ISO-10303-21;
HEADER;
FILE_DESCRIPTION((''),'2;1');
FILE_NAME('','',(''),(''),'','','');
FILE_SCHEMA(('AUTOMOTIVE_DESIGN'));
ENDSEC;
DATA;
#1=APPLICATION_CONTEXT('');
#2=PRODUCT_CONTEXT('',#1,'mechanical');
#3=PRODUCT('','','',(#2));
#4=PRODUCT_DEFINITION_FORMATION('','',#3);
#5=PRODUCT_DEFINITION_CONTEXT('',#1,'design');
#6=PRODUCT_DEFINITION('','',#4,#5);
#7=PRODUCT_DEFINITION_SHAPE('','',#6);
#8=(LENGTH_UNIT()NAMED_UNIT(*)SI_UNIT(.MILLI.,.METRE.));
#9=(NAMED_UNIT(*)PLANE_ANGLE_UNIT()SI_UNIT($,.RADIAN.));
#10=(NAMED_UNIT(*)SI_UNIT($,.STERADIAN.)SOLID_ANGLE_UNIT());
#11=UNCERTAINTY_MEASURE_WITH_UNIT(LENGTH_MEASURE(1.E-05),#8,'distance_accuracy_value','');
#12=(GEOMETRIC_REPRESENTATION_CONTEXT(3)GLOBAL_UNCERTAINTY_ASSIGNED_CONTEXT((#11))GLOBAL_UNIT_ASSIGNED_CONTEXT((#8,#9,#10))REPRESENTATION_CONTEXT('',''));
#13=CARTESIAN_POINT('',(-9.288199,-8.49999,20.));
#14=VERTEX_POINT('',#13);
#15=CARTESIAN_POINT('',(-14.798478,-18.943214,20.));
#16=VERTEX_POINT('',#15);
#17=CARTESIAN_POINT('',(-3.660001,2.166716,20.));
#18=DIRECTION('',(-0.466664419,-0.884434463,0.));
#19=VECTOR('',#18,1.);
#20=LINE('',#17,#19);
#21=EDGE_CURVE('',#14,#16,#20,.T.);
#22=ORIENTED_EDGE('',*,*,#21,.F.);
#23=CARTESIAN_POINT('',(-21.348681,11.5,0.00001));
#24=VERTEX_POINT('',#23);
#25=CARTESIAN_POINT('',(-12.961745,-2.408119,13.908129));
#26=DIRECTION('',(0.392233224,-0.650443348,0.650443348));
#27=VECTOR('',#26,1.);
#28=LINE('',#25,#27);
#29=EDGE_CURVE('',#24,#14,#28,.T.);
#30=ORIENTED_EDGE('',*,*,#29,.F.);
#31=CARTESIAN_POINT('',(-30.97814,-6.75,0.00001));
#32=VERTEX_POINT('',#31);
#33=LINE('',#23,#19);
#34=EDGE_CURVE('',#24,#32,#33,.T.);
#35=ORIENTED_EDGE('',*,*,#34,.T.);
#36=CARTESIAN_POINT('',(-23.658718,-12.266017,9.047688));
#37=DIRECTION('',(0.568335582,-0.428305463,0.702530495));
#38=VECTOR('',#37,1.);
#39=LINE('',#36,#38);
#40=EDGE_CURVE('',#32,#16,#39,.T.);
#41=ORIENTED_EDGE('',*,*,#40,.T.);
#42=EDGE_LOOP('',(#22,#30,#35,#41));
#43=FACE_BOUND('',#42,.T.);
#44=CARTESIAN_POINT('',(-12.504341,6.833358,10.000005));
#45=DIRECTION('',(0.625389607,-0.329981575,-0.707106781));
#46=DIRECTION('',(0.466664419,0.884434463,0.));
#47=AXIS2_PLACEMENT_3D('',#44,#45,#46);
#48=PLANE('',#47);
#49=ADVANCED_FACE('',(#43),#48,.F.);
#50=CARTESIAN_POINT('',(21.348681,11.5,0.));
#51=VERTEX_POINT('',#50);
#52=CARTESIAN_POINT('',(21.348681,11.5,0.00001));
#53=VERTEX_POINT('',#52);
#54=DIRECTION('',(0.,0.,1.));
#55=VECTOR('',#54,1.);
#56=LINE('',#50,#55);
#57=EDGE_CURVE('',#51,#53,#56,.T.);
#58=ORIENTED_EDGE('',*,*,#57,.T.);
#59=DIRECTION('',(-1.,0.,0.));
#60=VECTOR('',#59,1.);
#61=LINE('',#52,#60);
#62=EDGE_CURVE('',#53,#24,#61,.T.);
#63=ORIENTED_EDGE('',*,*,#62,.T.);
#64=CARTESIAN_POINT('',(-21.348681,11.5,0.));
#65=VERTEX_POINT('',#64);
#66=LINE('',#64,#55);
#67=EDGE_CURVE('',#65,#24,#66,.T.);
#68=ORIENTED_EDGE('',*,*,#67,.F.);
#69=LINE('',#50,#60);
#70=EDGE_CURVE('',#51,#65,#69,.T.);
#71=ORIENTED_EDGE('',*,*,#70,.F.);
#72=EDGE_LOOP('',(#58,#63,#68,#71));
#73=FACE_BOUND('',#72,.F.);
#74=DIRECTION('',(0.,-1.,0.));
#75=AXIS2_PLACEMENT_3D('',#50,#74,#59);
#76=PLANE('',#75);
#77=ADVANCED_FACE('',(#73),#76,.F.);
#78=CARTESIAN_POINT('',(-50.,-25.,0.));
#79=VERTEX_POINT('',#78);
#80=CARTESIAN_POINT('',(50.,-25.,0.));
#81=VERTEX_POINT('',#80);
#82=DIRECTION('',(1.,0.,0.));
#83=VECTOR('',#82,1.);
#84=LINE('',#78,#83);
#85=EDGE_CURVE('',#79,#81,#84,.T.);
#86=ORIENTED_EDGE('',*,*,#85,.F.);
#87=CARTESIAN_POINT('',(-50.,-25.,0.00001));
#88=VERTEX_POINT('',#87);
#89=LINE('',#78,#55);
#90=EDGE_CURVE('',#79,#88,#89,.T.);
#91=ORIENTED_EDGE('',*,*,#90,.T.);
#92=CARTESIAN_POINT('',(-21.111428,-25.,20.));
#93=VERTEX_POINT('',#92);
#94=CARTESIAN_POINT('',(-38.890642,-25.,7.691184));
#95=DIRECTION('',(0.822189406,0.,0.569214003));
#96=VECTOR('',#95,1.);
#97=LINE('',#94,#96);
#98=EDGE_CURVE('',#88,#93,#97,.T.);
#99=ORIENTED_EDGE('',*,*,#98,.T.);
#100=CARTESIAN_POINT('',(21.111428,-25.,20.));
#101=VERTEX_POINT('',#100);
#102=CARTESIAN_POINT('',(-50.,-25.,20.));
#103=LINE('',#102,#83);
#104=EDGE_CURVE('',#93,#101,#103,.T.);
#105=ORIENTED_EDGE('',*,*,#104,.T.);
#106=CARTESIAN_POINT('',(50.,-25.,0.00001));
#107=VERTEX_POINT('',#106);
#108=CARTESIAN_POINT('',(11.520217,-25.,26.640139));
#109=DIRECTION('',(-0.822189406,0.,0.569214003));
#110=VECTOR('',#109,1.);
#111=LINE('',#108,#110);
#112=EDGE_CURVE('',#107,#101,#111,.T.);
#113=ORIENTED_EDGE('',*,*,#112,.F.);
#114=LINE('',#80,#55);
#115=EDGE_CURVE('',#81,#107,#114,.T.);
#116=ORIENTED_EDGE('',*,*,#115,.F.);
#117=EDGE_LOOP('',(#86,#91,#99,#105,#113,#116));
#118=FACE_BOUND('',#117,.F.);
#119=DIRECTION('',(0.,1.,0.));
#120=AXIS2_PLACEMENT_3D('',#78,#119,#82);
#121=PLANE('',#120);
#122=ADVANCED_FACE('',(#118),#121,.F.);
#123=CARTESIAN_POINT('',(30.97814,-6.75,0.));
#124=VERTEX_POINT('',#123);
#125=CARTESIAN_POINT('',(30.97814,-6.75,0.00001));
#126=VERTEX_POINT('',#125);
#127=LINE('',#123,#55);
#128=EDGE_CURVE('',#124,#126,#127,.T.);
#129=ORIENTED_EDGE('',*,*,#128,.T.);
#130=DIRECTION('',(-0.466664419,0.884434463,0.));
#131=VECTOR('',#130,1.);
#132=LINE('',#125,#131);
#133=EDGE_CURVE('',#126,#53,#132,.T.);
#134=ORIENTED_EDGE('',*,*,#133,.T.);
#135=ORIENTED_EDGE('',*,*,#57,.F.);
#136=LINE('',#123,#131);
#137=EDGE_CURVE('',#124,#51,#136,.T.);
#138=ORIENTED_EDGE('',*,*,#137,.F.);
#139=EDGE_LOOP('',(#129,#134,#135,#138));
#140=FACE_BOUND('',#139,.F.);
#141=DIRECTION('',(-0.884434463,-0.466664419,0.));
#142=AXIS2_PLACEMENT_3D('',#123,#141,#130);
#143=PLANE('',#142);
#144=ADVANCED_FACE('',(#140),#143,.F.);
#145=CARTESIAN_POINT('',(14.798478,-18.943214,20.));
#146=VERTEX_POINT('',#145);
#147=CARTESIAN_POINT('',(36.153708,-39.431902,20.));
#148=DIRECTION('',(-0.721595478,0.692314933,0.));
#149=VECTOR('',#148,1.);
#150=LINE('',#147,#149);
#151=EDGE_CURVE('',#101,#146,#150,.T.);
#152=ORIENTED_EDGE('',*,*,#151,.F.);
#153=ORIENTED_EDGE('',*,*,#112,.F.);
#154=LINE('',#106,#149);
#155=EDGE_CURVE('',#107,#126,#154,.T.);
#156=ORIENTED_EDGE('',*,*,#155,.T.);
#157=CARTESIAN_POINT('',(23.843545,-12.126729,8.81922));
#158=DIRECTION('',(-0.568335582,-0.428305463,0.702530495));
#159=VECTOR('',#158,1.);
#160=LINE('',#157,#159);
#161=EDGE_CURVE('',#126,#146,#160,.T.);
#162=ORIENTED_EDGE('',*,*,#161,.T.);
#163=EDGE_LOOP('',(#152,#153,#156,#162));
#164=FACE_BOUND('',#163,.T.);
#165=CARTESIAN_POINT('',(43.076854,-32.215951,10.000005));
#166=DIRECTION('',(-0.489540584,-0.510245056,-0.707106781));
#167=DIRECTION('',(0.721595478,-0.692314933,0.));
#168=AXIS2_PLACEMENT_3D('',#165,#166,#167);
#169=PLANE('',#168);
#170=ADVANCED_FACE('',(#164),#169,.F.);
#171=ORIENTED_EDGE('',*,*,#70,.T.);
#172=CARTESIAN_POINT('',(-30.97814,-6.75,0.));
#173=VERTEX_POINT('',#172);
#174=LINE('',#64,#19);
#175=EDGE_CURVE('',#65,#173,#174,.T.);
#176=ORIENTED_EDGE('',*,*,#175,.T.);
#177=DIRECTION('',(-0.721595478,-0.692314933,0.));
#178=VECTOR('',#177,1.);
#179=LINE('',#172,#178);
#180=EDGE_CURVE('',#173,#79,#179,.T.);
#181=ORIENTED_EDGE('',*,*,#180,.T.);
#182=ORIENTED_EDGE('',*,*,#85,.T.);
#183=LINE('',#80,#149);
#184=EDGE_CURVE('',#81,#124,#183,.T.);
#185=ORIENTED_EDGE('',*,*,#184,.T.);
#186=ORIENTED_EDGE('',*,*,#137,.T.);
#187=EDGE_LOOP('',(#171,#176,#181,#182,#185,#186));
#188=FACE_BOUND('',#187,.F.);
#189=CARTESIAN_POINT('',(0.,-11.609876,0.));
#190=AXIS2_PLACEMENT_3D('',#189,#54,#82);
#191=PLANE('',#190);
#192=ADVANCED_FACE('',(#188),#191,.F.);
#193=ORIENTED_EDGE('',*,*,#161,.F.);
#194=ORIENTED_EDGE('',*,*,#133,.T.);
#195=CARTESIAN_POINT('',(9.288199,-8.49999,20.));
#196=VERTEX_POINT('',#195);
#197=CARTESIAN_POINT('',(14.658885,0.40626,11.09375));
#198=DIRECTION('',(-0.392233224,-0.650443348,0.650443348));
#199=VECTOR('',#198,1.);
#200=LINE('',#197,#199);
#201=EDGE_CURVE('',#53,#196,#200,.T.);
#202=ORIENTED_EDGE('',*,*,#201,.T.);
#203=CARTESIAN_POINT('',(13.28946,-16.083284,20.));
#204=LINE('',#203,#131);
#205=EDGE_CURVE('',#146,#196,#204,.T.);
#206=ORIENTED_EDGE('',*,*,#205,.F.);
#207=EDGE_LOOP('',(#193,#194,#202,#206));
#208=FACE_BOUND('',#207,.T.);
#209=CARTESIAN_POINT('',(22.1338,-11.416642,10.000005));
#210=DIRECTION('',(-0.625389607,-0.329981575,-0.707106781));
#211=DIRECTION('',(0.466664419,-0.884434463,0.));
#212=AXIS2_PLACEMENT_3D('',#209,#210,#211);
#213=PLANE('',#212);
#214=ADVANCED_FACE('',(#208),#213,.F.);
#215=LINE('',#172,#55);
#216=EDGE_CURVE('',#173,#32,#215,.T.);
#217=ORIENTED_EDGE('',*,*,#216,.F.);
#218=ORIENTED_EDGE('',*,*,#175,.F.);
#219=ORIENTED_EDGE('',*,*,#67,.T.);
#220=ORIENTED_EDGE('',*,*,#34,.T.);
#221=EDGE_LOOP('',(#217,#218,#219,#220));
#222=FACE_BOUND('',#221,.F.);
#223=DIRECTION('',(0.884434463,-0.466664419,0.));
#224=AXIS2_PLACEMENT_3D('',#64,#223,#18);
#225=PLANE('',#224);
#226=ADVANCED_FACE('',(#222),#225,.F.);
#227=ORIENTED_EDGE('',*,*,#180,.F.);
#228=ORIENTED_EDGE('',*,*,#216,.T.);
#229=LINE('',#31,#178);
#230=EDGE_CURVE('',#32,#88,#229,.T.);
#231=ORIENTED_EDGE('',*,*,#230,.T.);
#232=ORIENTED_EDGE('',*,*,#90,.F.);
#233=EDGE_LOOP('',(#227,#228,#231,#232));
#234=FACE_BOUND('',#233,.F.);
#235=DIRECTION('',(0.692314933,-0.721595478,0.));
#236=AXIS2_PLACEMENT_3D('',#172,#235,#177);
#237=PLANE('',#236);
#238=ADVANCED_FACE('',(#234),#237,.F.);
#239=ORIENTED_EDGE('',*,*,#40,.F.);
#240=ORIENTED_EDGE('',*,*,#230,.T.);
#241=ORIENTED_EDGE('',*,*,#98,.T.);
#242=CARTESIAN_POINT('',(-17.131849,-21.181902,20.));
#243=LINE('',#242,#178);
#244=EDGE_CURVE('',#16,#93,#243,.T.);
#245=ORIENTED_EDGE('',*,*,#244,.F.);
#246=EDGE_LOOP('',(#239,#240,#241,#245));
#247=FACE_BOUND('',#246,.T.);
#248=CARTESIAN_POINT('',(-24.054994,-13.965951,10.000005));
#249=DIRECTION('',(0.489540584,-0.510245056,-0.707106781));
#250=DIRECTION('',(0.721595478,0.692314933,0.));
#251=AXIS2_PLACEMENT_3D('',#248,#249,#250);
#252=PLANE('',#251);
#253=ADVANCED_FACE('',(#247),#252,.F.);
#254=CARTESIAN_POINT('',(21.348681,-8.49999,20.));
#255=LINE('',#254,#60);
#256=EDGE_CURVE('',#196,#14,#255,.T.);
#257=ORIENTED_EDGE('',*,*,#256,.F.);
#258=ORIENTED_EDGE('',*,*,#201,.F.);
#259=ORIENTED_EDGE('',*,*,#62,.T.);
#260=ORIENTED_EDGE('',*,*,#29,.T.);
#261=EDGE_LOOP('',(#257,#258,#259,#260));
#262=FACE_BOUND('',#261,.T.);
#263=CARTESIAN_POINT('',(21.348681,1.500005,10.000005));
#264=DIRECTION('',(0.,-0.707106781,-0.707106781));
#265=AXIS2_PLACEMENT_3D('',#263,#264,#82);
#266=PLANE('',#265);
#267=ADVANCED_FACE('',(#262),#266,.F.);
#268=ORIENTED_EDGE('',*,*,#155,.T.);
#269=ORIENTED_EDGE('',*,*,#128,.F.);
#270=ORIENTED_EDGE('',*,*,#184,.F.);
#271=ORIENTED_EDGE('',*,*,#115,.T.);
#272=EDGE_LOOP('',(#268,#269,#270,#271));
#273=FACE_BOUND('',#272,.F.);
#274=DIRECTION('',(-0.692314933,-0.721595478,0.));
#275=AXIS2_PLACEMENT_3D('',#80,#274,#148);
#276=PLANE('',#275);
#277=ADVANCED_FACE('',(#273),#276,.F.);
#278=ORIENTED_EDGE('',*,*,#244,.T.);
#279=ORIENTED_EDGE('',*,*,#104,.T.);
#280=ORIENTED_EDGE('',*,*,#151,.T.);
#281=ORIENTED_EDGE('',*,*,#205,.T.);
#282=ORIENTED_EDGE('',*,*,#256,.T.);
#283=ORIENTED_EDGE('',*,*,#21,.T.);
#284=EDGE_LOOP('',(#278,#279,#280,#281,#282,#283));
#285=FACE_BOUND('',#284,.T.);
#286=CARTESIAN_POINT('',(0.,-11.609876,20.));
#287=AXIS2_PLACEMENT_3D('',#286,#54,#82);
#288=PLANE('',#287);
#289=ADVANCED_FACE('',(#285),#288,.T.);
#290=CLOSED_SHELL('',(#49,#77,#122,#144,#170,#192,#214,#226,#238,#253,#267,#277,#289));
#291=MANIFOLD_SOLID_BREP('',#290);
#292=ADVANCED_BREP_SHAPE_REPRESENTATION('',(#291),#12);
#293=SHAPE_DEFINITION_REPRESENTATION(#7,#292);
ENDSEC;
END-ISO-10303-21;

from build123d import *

# Parameters (mm, degrees)
F1_DEPTH = 20
F2_SIZE  = 19.99999


# Not quite as in the source:
# - a fillet or chamfer is up to 0.001 mm smaller than in the source, because OpenCascade refuses the exact size


with BuildPart() as f1:
    # F0 (on Top) → F1 (new body)
    with BuildSketch(Plane.XY):
        Polygon((-30.9781403543, -6.75), (-50, -25), (50, -25), (30.9781403543, -6.75), (21.3486810742, 11.5), (-21.3486810742, 11.5), align=None)
    extrude(amount=F1_DEPTH)

    # F2 (size 20 in the source; OpenCascade refuses exactly that, so slightly less here)
    f2_edges = [f1.edges().sort_by_distance(p)[0] for p in [
        (0, 11.5, 20),
        (26.163411, 2.375, 20),
        (40.48907, -15.875, 20),
        (-40.48907, -15.875, 20),
        (-26.163411, 2.375, 20),
    ]]
    chamfer(f2_edges, length=F2_SIZE)


solid = f1.part
